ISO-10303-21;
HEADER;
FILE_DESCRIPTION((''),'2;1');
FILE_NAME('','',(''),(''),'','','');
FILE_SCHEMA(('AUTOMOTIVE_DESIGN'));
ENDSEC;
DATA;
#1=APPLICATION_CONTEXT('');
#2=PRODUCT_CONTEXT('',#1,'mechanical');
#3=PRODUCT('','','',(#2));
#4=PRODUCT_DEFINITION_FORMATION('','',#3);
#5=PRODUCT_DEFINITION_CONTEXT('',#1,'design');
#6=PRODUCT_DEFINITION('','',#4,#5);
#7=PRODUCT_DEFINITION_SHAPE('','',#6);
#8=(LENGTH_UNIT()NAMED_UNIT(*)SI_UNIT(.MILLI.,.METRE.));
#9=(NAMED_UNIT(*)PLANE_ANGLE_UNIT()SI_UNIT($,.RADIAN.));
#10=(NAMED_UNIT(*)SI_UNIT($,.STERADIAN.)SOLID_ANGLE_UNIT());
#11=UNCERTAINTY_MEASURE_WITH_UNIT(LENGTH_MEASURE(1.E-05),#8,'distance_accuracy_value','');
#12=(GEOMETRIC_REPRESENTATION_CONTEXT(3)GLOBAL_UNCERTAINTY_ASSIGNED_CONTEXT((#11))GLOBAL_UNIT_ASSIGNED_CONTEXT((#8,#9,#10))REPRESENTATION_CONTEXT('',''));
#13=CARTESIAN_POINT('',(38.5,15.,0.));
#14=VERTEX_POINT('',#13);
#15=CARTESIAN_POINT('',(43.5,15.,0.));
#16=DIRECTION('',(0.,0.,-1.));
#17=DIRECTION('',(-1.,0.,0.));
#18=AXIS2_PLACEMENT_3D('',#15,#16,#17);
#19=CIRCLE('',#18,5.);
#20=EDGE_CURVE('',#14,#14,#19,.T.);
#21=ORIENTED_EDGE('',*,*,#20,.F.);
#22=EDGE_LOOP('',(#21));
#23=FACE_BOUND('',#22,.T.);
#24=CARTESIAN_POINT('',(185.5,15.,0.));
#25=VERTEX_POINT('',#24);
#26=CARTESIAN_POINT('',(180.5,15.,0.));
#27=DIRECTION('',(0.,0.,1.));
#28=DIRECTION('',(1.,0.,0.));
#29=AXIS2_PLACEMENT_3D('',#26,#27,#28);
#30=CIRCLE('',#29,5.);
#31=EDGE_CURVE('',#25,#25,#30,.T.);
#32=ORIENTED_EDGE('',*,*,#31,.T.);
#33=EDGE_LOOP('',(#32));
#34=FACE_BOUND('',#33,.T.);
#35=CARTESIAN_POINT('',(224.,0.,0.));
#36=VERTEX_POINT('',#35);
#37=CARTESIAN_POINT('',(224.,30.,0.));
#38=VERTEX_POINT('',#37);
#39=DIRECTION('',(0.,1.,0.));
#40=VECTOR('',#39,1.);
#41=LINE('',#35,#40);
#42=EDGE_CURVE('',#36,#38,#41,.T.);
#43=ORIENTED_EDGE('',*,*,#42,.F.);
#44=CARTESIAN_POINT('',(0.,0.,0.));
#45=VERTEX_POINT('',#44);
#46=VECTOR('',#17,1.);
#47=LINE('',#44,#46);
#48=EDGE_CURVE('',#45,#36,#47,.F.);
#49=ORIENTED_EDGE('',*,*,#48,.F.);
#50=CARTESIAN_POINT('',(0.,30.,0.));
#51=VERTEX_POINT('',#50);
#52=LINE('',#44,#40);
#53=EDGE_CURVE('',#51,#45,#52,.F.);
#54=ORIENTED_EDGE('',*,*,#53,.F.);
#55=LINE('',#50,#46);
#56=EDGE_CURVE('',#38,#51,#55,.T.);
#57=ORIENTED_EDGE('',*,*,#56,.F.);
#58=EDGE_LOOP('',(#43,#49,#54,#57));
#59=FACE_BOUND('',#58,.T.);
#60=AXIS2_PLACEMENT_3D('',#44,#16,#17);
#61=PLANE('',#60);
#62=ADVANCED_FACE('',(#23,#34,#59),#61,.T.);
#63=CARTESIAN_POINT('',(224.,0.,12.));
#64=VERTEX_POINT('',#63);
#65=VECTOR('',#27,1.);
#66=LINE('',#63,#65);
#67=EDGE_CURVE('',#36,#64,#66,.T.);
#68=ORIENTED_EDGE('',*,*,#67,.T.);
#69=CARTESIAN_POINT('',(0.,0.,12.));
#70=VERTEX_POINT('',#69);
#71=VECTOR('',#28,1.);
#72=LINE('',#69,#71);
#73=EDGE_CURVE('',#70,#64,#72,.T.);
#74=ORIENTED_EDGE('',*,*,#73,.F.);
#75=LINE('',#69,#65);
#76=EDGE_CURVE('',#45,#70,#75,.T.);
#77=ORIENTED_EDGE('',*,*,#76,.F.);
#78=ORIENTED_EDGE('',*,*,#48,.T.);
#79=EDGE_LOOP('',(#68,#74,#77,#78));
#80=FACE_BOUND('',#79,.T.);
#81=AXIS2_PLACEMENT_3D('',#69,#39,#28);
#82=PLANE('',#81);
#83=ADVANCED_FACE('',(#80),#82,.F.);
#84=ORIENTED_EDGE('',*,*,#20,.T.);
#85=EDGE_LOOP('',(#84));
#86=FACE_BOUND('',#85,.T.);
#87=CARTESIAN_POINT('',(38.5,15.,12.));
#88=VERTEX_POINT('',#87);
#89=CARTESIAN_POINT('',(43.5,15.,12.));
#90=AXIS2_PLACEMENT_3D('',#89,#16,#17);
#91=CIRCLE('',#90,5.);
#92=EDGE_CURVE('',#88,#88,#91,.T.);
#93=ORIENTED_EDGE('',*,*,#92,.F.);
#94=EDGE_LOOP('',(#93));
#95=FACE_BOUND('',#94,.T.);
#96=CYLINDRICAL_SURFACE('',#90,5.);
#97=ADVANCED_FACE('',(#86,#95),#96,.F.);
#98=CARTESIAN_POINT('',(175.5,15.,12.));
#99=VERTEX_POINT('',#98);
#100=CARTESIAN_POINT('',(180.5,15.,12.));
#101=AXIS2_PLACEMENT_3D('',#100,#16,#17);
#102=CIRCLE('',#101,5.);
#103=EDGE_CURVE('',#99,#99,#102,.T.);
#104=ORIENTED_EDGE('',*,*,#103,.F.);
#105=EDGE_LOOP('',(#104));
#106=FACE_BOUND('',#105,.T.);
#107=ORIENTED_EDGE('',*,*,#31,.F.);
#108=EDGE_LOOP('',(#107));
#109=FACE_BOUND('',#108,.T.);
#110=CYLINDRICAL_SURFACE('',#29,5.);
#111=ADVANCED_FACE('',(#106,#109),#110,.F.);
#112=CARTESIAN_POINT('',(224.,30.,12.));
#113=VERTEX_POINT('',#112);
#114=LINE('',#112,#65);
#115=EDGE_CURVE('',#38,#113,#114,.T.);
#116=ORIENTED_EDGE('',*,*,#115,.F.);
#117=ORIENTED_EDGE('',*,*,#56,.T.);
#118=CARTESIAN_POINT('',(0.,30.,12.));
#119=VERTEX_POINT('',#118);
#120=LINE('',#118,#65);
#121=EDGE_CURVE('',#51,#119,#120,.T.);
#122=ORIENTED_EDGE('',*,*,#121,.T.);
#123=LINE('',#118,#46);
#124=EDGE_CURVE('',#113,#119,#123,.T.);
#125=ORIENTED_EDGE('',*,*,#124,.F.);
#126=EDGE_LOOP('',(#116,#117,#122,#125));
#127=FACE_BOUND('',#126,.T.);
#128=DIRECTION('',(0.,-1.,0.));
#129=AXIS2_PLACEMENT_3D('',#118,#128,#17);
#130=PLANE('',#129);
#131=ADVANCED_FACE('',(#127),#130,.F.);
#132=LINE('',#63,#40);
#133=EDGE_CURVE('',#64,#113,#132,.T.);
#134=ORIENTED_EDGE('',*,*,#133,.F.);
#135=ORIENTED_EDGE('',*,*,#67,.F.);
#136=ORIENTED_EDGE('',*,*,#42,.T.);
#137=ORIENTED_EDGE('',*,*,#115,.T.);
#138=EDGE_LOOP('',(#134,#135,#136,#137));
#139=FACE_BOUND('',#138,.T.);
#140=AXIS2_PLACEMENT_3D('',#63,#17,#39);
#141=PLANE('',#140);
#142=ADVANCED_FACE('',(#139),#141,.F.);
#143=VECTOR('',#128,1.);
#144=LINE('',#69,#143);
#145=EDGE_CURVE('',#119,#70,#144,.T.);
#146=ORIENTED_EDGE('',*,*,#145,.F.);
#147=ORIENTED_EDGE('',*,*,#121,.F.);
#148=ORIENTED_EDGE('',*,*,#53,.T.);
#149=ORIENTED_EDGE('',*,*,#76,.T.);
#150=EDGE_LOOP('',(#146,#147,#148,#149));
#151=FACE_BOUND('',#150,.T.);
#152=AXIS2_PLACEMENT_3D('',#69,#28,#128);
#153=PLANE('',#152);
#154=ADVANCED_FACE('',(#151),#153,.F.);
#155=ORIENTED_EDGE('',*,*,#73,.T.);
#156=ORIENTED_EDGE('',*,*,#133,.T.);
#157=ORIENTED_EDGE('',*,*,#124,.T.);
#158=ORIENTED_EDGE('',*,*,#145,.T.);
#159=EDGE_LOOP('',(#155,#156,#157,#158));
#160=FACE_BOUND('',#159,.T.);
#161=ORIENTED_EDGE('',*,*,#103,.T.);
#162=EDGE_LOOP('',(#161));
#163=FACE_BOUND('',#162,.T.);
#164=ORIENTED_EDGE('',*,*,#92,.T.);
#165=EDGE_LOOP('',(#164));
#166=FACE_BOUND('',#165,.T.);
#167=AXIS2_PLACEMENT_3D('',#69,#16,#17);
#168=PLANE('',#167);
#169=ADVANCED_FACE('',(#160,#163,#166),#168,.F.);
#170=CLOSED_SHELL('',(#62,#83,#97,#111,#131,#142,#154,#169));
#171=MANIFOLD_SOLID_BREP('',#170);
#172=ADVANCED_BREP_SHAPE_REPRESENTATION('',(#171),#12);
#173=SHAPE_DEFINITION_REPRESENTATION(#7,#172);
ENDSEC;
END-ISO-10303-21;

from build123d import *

# Parameters (mm, degrees)
SKETCH_1_W             = 224
SKETCH_1_H             = 30
EXTRUDE_1_DEPTH        = 12
SKETCH_4_R             = 5
CUT_EXTRUDE_1_DEPTH    = 227.318359839
PATTERN_LINEAR_1_COUNT = 2
PATTERN_LINEAR_1_PITCH = 137


with BuildPart() as part:
    # Sketch 1 → Бобышка-Вытянуть1 (new body)
    with BuildSketch(Plane.XY):
        with Locations((112, 15)):
            Rectangle(SKETCH_1_W, SKETCH_1_H)
    extrude(amount=EXTRUDE_1_DEPTH)

    # Эскиз4 → Вырез-Вытянуть1 (cut, symmetric)
    with BuildSketch(Plane.XY.offset(12)):
        with Locations((43.5, 15)):
            Circle(SKETCH_4_R)
    cut_extrude_1 = extrude(amount=CUT_EXTRUDE_1_DEPTH, both=True, mode=Mode.SUBTRACT)

    # Линейный массив1: Вырез-Вытянуть1 ×2
    with Locations(*[(i * PATTERN_LINEAR_1_PITCH, 0, 0) for i in range(1, PATTERN_LINEAR_1_COUNT)]):
        add(cut_extrude_1, mode=Mode.SUBTRACT)


solid = part.part
